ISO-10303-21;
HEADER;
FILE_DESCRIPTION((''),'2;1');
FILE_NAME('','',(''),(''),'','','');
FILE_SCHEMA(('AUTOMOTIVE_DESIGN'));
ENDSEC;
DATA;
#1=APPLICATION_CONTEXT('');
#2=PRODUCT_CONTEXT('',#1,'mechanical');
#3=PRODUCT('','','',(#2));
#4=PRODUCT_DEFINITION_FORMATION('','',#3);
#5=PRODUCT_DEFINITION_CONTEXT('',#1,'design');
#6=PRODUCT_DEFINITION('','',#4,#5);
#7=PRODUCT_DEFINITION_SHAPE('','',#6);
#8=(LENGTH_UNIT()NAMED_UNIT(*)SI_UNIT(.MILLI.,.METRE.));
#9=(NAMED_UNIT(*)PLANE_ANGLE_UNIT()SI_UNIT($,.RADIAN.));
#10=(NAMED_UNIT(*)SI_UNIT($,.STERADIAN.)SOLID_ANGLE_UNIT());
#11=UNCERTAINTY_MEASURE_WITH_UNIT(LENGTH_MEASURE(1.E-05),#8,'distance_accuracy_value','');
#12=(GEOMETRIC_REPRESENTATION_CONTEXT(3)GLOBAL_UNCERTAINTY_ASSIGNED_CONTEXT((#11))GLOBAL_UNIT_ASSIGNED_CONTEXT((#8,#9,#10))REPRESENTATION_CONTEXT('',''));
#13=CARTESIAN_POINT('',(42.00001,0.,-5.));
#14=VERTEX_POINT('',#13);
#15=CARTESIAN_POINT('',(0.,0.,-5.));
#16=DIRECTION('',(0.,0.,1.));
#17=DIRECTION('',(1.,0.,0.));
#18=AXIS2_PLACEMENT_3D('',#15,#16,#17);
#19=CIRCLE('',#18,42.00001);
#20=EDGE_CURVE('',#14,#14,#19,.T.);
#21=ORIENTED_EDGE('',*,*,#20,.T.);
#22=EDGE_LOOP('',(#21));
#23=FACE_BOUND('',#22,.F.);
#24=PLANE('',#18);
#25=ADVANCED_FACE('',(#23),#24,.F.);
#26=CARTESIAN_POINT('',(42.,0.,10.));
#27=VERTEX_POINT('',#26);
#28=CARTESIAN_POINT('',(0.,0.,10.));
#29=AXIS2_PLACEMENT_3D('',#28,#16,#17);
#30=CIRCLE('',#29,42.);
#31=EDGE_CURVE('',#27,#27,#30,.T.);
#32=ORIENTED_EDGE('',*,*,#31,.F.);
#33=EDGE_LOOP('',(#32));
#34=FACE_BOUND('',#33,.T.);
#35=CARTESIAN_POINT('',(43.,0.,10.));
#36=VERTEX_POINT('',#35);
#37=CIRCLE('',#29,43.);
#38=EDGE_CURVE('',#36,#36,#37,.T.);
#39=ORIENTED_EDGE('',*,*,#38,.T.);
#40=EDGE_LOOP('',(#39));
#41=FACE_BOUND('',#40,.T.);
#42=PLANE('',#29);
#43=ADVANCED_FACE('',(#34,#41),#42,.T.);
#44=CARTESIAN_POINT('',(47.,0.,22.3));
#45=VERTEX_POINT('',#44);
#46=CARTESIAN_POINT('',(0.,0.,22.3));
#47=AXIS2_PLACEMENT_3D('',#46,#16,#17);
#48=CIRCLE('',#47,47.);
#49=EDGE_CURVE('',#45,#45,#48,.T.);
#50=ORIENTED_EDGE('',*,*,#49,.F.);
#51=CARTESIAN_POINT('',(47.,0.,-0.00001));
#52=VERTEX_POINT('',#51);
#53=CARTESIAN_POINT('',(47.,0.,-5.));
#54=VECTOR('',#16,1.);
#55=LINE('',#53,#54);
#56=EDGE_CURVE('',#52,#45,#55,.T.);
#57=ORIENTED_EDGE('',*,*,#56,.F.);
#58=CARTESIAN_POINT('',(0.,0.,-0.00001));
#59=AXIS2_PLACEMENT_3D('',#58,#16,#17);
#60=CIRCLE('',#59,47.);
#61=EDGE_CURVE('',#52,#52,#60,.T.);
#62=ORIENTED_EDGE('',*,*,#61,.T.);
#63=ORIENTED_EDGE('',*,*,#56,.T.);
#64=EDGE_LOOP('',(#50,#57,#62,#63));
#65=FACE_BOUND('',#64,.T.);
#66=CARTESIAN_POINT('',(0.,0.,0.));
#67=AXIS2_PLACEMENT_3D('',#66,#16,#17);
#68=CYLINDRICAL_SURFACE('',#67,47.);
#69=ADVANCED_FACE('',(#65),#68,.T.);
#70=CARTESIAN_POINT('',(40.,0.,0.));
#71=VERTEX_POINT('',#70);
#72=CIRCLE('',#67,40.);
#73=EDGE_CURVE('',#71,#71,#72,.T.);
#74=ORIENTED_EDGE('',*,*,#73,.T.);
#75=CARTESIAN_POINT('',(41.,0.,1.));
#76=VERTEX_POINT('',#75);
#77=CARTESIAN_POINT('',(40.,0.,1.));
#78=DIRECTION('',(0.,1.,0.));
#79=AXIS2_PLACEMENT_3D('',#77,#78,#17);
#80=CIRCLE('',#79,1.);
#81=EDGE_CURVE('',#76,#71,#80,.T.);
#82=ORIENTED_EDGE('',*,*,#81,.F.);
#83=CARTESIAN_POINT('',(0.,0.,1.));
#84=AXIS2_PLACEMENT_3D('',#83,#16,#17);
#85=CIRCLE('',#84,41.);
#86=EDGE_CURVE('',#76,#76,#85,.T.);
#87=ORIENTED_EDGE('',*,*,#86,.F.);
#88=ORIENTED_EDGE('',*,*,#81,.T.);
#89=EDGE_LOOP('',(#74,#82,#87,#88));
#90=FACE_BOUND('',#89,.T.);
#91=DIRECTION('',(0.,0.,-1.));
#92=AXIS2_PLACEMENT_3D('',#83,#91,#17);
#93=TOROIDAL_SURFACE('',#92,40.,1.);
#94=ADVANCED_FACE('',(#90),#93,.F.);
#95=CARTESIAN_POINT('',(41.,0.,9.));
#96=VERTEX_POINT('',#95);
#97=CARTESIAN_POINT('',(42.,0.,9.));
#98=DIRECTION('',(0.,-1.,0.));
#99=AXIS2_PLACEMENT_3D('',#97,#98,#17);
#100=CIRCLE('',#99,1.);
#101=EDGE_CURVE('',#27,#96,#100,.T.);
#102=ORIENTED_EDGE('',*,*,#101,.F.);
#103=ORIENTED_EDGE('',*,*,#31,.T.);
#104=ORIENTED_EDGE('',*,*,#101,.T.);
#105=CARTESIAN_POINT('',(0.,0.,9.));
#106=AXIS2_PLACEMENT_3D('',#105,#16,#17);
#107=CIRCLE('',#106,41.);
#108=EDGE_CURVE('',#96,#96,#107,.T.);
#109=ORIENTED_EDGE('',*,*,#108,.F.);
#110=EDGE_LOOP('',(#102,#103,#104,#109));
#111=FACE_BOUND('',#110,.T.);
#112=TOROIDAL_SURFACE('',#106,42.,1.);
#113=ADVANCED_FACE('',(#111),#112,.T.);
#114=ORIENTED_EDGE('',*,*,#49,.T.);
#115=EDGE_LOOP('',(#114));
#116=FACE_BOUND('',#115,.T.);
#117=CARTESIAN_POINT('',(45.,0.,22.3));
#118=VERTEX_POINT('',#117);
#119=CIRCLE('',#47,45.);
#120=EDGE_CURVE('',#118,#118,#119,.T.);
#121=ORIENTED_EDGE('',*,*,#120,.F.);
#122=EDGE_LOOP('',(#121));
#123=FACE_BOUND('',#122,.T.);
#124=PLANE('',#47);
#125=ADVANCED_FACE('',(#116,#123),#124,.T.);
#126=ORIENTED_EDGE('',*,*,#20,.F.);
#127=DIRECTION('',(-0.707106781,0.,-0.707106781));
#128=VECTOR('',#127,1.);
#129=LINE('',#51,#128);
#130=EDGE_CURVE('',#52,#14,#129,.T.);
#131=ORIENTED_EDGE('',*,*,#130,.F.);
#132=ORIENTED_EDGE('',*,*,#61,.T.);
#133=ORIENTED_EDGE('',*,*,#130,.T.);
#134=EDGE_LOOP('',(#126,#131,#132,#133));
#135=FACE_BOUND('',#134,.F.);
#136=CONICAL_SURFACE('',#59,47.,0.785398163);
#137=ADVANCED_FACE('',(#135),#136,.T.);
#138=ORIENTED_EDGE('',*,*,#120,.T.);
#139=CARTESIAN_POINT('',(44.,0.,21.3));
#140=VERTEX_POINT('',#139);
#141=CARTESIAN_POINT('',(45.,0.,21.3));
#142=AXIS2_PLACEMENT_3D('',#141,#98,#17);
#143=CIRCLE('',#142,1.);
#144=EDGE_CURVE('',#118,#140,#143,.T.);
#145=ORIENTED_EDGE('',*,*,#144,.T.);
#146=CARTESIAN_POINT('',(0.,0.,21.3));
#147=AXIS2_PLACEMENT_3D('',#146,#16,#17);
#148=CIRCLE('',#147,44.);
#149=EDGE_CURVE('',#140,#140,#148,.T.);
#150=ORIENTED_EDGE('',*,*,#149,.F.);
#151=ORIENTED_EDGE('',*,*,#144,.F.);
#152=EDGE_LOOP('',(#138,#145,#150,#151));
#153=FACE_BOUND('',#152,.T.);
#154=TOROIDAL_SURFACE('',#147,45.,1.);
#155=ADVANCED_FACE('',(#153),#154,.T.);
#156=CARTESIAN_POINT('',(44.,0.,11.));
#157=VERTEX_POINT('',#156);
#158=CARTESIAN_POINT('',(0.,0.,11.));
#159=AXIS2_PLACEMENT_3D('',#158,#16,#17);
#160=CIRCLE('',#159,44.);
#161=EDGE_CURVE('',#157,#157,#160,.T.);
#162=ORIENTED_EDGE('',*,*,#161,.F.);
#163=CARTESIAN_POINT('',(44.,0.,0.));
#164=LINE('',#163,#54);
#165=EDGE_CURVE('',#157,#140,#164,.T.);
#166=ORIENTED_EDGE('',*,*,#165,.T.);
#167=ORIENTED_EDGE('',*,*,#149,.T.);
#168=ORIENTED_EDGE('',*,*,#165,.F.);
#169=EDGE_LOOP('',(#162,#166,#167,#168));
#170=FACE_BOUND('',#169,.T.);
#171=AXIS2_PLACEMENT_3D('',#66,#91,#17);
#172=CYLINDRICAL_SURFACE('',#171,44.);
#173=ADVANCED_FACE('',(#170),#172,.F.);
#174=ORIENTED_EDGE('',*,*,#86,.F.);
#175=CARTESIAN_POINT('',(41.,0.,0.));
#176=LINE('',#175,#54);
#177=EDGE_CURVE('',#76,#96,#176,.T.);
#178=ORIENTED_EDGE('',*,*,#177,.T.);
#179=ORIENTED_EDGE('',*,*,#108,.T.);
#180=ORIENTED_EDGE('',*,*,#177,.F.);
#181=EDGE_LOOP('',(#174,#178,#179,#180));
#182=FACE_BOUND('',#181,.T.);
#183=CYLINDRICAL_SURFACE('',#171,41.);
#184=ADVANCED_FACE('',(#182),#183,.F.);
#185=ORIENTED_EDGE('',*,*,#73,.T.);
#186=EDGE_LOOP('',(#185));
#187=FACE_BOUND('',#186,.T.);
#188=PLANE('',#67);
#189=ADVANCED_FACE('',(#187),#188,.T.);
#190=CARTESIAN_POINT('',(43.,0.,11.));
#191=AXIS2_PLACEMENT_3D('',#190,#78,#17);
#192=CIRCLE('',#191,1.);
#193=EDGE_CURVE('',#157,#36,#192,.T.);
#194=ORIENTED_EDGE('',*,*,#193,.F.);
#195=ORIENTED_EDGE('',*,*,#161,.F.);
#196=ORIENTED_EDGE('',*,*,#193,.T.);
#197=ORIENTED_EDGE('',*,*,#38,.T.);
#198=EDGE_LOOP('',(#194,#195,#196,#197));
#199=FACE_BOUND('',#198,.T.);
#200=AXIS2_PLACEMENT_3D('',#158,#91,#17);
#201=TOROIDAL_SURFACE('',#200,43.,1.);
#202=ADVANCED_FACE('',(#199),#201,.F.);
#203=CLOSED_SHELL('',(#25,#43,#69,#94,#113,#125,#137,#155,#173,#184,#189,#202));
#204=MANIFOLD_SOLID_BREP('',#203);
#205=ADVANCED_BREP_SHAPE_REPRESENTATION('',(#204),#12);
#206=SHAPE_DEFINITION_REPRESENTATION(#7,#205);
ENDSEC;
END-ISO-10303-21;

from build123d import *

# Parameters (mm, degrees)
F0_R     = 47
F0_R_2   = 44
F1_DEPTH = 22.3
F0_R_3   = 41
F2_DEPTH = 10
F3_DEPTH = 5
F4_R     = 1
F5_SIZE  = 4.99999


# Not quite as in the source:
# - a fillet or chamfer is up to 0.001 mm smaller than in the source, because OpenCascade refuses the exact size


with BuildPart() as f1:
    # F0 (on Top) → F1 (new body)
    with BuildSketch(Plane.XY):
        Circle(F0_R)
        Circle(F0_R_2, mode=Mode.SUBTRACT)
    extrude(amount=F1_DEPTH)

    # F0 (on Top) → F2 (join)
    with BuildSketch(Plane.XY):
        Circle(F0_R_2)
        Circle(F0_R_3, mode=Mode.SUBTRACT)
    extrude(amount=F2_DEPTH)

    # F0 (on Top) → F3 (join)
    with BuildSketch(Plane.XY):
        Circle(F0_R)
        Circle(F0_R_2, mode=Mode.SUBTRACT)
        Circle(F0_R_2)
        Circle(F0_R_3, mode=Mode.SUBTRACT)
        Circle(F0_R_3)
    extrude(amount=-F3_DEPTH)

    # F4
    f4_edges = [f1.edges().sort_by_distance(p)[0] for p in [
        (-44, 0, 22.3),
        (-44, 0, 10),
        (-41, 0, 10),
        (-41, 0, 0),
    ]]
    fillet(f4_edges, radius=F4_R)

    # F5 (size 5 in the source; OpenCascade refuses exactly that, so slightly less here)
    f5_edges = [f1.edges().sort_by_distance(p)[0] for p in [
        (-47, 0, -5),
    ]]
    chamfer(f5_edges, length=F5_SIZE)


solid = f1.part
